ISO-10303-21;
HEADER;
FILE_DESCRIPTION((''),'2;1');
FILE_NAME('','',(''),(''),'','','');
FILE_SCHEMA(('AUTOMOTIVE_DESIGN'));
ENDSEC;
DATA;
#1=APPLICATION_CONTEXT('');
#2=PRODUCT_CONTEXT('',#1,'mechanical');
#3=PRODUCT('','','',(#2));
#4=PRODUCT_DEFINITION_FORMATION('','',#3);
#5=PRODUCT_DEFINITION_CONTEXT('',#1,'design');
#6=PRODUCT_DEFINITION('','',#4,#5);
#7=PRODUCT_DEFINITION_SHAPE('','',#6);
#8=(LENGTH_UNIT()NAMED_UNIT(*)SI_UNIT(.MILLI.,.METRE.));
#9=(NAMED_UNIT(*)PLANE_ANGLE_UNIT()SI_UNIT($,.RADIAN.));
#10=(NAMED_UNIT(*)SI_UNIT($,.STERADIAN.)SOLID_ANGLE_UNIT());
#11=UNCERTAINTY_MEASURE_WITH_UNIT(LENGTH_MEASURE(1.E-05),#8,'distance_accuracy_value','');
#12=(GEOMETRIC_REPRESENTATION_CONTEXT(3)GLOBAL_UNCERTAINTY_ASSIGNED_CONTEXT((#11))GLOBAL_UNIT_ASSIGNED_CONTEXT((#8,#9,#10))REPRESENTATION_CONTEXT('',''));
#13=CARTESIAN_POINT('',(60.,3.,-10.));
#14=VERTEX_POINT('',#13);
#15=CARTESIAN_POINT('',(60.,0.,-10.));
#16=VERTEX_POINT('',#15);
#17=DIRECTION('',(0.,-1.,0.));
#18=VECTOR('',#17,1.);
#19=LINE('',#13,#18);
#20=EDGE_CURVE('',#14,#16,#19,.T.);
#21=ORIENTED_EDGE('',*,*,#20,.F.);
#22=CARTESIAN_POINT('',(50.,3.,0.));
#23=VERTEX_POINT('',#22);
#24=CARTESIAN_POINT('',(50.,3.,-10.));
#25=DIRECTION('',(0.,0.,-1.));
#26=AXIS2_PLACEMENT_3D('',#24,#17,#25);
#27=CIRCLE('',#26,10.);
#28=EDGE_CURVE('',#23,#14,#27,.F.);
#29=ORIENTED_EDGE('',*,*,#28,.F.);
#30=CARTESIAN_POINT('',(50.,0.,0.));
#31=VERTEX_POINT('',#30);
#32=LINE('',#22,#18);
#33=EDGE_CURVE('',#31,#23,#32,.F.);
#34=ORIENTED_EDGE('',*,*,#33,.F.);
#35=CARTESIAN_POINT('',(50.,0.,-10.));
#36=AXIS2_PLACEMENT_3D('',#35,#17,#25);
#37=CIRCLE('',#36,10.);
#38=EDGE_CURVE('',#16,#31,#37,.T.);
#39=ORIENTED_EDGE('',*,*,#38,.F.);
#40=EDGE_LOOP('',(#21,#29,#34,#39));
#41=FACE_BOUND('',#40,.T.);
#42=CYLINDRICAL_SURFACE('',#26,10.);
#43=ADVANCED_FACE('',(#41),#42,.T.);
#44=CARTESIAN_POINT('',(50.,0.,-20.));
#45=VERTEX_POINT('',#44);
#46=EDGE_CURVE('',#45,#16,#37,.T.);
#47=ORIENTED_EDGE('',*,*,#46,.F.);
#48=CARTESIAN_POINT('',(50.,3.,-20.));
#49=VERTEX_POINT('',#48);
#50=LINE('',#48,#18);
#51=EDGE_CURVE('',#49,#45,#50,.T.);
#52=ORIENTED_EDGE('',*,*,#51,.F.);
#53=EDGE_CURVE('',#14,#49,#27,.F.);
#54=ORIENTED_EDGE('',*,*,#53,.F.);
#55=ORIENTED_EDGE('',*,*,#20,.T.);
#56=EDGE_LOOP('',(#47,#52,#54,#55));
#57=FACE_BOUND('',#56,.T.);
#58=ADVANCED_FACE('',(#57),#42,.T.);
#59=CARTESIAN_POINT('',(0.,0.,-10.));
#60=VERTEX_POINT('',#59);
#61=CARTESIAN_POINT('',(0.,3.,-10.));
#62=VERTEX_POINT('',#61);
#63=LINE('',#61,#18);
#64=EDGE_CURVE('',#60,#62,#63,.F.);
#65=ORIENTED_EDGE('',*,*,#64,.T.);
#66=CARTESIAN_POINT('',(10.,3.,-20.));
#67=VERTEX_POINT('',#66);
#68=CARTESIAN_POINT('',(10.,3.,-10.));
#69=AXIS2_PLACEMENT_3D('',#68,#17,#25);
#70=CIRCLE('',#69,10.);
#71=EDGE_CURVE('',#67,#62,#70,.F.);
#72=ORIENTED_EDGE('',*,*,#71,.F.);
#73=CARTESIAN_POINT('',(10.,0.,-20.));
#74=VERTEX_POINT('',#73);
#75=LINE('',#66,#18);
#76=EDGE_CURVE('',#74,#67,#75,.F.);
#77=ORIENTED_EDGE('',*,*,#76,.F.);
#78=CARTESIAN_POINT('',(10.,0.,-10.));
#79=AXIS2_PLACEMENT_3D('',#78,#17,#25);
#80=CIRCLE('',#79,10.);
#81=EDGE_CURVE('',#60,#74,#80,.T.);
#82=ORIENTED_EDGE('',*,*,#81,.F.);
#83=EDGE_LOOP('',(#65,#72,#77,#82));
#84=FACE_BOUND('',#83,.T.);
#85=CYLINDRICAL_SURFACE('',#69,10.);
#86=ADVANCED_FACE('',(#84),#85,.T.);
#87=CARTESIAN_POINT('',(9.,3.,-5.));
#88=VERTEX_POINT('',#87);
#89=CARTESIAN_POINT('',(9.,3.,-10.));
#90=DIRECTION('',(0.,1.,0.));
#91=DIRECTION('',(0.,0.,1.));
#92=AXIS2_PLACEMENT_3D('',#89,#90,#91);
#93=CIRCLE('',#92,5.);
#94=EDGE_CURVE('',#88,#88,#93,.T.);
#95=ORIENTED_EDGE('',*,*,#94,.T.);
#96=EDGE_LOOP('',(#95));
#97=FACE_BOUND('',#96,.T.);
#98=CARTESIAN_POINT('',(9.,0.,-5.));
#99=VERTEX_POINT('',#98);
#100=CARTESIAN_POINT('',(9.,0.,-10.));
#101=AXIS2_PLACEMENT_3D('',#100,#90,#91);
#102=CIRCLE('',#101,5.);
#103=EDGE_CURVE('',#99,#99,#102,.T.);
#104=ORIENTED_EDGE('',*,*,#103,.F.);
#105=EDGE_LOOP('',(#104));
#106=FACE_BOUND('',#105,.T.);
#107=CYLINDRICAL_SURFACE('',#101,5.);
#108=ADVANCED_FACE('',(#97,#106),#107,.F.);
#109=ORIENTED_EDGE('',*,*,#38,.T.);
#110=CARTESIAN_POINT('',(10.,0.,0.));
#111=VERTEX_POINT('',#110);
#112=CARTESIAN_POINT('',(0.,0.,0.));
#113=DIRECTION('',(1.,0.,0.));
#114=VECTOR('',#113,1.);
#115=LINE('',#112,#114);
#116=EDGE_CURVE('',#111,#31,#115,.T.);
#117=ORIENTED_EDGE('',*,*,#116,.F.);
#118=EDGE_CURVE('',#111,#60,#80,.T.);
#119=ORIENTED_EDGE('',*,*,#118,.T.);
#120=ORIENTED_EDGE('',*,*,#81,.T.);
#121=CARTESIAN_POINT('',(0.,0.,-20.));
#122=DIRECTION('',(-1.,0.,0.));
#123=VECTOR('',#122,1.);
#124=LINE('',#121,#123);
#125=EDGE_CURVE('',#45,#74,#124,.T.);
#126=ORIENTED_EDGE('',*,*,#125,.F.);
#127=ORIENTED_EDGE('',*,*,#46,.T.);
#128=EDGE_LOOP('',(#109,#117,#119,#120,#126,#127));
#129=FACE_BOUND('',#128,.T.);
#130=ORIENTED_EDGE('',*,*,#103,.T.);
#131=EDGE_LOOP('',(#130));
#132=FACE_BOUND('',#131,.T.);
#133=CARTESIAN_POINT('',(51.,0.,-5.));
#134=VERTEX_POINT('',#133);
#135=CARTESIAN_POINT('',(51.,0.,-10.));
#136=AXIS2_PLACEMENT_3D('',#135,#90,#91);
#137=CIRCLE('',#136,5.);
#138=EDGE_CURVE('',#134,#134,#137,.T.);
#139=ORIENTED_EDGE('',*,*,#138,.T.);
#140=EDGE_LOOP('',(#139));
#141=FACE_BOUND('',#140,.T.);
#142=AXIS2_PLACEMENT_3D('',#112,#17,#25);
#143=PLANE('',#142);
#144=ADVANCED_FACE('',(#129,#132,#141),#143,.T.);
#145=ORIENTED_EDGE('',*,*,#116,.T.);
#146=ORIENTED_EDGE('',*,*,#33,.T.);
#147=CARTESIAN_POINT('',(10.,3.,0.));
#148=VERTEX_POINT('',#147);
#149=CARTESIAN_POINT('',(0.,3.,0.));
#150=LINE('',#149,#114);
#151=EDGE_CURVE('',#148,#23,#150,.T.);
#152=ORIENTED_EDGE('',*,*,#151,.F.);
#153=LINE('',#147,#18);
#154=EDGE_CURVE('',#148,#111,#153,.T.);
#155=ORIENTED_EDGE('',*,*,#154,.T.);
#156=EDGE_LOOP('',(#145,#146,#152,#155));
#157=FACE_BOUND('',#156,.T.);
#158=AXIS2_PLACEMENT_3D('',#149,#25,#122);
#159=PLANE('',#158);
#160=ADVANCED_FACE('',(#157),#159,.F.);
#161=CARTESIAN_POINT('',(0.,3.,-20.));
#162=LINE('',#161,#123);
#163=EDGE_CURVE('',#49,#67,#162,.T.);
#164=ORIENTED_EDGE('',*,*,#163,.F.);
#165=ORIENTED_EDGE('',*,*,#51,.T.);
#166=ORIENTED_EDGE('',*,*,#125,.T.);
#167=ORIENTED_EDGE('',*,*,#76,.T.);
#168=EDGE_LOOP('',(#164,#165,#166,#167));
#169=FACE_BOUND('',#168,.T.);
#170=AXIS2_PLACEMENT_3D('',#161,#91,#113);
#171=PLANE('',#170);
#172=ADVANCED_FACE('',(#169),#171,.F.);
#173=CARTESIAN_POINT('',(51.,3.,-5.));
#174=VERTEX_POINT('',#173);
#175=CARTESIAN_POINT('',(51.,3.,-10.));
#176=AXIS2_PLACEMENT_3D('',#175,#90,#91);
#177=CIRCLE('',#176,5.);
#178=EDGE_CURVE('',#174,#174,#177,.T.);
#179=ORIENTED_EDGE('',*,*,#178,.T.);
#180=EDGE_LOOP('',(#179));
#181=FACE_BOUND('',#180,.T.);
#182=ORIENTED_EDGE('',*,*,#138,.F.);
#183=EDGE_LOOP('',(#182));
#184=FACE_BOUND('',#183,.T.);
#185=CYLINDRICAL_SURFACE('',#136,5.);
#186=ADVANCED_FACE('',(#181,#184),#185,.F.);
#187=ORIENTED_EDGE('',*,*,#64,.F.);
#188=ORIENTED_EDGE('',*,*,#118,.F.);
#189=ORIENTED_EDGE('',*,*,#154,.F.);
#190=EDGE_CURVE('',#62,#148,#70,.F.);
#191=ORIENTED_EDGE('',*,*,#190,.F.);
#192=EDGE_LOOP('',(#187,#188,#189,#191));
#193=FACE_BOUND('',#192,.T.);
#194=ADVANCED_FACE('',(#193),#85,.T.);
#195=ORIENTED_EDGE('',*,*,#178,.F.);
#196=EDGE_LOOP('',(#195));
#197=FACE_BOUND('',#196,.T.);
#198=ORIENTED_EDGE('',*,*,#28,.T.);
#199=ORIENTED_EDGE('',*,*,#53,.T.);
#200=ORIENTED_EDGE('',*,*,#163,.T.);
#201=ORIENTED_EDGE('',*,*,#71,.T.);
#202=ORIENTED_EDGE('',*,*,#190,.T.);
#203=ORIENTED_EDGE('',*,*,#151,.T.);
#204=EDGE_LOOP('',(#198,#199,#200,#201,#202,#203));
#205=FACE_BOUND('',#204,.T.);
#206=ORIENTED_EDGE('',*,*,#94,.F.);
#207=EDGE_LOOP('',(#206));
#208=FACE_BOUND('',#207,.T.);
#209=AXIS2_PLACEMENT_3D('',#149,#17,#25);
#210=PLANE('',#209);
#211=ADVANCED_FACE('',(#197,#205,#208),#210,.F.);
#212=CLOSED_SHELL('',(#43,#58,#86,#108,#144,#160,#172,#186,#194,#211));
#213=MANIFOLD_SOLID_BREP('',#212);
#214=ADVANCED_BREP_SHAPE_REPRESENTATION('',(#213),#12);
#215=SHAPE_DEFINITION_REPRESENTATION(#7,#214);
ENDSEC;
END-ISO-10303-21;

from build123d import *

# Parameters (mm, degrees)
SKETCH2_W           = 60
SKETCH2_H           = 20
BOSS_EXTRUDE1_DEPTH = 3
SKETCH3_R           = 5
CUT_EXTRUDE1_DEPTH  = 64.316664473
SKETCH4_R           = 5
CUT_EXTRUDE2_DEPTH  = 64.316664473
FILLET1_R           = 10
FILLET2_R           = 10


with BuildPart() as part:
    # Sketch2 → Boss-Extrude1 (new body)
    with BuildSketch(Plane(origin=(0, 0, 0), x_dir=(1, 0, 0), z_dir=(0, 1, 0))):
        with Locations((30, 10)):
            Rectangle(SKETCH2_W, SKETCH2_H)
    extrude(amount=BOSS_EXTRUDE1_DEPTH)

    # Sketch3 → Cut-Extrude1 (cut, through all)
    with BuildSketch(Plane(origin=(0, 3, 0), x_dir=(1, 0, 0), z_dir=(0, 1, 0))):
        with Locations(Location((9, 10, 0), (0, 0, 270))):
            Circle(SKETCH3_R)
    extrude(amount=-CUT_EXTRUDE1_DEPTH, mode=Mode.SUBTRACT)

    # Sketch4 → Cut-Extrude2 (cut, through all)
    with BuildSketch(Plane(origin=(0, 3, 0), x_dir=(1, 0, 0), z_dir=(0, 1, 0))):
        with Locations(Location((51, 10, 0), (0, 0, 270))):
            Circle(SKETCH4_R)
    extrude(amount=-CUT_EXTRUDE2_DEPTH, mode=Mode.SUBTRACT)

    # Fillet1
    fillet1_edges = [part.edges().sort_by_distance(p)[0] for p in [
        (0, 1.5, -20),
        (0, 1.5, 0),
    ]]
    fillet(fillet1_edges, radius=FILLET1_R - 0.0001)  # a hair under: the kernel refuses the full size

    # Fillet2
    fillet2_edges = [part.edges().sort_by_distance(p)[0] for p in [
        (60, 1.5, -20),
        (60, 1.5, 0),
    ]]
    fillet(fillet2_edges, radius=FILLET2_R - 0.0001)  # a hair under: the kernel refuses the full size


solid = part.part
